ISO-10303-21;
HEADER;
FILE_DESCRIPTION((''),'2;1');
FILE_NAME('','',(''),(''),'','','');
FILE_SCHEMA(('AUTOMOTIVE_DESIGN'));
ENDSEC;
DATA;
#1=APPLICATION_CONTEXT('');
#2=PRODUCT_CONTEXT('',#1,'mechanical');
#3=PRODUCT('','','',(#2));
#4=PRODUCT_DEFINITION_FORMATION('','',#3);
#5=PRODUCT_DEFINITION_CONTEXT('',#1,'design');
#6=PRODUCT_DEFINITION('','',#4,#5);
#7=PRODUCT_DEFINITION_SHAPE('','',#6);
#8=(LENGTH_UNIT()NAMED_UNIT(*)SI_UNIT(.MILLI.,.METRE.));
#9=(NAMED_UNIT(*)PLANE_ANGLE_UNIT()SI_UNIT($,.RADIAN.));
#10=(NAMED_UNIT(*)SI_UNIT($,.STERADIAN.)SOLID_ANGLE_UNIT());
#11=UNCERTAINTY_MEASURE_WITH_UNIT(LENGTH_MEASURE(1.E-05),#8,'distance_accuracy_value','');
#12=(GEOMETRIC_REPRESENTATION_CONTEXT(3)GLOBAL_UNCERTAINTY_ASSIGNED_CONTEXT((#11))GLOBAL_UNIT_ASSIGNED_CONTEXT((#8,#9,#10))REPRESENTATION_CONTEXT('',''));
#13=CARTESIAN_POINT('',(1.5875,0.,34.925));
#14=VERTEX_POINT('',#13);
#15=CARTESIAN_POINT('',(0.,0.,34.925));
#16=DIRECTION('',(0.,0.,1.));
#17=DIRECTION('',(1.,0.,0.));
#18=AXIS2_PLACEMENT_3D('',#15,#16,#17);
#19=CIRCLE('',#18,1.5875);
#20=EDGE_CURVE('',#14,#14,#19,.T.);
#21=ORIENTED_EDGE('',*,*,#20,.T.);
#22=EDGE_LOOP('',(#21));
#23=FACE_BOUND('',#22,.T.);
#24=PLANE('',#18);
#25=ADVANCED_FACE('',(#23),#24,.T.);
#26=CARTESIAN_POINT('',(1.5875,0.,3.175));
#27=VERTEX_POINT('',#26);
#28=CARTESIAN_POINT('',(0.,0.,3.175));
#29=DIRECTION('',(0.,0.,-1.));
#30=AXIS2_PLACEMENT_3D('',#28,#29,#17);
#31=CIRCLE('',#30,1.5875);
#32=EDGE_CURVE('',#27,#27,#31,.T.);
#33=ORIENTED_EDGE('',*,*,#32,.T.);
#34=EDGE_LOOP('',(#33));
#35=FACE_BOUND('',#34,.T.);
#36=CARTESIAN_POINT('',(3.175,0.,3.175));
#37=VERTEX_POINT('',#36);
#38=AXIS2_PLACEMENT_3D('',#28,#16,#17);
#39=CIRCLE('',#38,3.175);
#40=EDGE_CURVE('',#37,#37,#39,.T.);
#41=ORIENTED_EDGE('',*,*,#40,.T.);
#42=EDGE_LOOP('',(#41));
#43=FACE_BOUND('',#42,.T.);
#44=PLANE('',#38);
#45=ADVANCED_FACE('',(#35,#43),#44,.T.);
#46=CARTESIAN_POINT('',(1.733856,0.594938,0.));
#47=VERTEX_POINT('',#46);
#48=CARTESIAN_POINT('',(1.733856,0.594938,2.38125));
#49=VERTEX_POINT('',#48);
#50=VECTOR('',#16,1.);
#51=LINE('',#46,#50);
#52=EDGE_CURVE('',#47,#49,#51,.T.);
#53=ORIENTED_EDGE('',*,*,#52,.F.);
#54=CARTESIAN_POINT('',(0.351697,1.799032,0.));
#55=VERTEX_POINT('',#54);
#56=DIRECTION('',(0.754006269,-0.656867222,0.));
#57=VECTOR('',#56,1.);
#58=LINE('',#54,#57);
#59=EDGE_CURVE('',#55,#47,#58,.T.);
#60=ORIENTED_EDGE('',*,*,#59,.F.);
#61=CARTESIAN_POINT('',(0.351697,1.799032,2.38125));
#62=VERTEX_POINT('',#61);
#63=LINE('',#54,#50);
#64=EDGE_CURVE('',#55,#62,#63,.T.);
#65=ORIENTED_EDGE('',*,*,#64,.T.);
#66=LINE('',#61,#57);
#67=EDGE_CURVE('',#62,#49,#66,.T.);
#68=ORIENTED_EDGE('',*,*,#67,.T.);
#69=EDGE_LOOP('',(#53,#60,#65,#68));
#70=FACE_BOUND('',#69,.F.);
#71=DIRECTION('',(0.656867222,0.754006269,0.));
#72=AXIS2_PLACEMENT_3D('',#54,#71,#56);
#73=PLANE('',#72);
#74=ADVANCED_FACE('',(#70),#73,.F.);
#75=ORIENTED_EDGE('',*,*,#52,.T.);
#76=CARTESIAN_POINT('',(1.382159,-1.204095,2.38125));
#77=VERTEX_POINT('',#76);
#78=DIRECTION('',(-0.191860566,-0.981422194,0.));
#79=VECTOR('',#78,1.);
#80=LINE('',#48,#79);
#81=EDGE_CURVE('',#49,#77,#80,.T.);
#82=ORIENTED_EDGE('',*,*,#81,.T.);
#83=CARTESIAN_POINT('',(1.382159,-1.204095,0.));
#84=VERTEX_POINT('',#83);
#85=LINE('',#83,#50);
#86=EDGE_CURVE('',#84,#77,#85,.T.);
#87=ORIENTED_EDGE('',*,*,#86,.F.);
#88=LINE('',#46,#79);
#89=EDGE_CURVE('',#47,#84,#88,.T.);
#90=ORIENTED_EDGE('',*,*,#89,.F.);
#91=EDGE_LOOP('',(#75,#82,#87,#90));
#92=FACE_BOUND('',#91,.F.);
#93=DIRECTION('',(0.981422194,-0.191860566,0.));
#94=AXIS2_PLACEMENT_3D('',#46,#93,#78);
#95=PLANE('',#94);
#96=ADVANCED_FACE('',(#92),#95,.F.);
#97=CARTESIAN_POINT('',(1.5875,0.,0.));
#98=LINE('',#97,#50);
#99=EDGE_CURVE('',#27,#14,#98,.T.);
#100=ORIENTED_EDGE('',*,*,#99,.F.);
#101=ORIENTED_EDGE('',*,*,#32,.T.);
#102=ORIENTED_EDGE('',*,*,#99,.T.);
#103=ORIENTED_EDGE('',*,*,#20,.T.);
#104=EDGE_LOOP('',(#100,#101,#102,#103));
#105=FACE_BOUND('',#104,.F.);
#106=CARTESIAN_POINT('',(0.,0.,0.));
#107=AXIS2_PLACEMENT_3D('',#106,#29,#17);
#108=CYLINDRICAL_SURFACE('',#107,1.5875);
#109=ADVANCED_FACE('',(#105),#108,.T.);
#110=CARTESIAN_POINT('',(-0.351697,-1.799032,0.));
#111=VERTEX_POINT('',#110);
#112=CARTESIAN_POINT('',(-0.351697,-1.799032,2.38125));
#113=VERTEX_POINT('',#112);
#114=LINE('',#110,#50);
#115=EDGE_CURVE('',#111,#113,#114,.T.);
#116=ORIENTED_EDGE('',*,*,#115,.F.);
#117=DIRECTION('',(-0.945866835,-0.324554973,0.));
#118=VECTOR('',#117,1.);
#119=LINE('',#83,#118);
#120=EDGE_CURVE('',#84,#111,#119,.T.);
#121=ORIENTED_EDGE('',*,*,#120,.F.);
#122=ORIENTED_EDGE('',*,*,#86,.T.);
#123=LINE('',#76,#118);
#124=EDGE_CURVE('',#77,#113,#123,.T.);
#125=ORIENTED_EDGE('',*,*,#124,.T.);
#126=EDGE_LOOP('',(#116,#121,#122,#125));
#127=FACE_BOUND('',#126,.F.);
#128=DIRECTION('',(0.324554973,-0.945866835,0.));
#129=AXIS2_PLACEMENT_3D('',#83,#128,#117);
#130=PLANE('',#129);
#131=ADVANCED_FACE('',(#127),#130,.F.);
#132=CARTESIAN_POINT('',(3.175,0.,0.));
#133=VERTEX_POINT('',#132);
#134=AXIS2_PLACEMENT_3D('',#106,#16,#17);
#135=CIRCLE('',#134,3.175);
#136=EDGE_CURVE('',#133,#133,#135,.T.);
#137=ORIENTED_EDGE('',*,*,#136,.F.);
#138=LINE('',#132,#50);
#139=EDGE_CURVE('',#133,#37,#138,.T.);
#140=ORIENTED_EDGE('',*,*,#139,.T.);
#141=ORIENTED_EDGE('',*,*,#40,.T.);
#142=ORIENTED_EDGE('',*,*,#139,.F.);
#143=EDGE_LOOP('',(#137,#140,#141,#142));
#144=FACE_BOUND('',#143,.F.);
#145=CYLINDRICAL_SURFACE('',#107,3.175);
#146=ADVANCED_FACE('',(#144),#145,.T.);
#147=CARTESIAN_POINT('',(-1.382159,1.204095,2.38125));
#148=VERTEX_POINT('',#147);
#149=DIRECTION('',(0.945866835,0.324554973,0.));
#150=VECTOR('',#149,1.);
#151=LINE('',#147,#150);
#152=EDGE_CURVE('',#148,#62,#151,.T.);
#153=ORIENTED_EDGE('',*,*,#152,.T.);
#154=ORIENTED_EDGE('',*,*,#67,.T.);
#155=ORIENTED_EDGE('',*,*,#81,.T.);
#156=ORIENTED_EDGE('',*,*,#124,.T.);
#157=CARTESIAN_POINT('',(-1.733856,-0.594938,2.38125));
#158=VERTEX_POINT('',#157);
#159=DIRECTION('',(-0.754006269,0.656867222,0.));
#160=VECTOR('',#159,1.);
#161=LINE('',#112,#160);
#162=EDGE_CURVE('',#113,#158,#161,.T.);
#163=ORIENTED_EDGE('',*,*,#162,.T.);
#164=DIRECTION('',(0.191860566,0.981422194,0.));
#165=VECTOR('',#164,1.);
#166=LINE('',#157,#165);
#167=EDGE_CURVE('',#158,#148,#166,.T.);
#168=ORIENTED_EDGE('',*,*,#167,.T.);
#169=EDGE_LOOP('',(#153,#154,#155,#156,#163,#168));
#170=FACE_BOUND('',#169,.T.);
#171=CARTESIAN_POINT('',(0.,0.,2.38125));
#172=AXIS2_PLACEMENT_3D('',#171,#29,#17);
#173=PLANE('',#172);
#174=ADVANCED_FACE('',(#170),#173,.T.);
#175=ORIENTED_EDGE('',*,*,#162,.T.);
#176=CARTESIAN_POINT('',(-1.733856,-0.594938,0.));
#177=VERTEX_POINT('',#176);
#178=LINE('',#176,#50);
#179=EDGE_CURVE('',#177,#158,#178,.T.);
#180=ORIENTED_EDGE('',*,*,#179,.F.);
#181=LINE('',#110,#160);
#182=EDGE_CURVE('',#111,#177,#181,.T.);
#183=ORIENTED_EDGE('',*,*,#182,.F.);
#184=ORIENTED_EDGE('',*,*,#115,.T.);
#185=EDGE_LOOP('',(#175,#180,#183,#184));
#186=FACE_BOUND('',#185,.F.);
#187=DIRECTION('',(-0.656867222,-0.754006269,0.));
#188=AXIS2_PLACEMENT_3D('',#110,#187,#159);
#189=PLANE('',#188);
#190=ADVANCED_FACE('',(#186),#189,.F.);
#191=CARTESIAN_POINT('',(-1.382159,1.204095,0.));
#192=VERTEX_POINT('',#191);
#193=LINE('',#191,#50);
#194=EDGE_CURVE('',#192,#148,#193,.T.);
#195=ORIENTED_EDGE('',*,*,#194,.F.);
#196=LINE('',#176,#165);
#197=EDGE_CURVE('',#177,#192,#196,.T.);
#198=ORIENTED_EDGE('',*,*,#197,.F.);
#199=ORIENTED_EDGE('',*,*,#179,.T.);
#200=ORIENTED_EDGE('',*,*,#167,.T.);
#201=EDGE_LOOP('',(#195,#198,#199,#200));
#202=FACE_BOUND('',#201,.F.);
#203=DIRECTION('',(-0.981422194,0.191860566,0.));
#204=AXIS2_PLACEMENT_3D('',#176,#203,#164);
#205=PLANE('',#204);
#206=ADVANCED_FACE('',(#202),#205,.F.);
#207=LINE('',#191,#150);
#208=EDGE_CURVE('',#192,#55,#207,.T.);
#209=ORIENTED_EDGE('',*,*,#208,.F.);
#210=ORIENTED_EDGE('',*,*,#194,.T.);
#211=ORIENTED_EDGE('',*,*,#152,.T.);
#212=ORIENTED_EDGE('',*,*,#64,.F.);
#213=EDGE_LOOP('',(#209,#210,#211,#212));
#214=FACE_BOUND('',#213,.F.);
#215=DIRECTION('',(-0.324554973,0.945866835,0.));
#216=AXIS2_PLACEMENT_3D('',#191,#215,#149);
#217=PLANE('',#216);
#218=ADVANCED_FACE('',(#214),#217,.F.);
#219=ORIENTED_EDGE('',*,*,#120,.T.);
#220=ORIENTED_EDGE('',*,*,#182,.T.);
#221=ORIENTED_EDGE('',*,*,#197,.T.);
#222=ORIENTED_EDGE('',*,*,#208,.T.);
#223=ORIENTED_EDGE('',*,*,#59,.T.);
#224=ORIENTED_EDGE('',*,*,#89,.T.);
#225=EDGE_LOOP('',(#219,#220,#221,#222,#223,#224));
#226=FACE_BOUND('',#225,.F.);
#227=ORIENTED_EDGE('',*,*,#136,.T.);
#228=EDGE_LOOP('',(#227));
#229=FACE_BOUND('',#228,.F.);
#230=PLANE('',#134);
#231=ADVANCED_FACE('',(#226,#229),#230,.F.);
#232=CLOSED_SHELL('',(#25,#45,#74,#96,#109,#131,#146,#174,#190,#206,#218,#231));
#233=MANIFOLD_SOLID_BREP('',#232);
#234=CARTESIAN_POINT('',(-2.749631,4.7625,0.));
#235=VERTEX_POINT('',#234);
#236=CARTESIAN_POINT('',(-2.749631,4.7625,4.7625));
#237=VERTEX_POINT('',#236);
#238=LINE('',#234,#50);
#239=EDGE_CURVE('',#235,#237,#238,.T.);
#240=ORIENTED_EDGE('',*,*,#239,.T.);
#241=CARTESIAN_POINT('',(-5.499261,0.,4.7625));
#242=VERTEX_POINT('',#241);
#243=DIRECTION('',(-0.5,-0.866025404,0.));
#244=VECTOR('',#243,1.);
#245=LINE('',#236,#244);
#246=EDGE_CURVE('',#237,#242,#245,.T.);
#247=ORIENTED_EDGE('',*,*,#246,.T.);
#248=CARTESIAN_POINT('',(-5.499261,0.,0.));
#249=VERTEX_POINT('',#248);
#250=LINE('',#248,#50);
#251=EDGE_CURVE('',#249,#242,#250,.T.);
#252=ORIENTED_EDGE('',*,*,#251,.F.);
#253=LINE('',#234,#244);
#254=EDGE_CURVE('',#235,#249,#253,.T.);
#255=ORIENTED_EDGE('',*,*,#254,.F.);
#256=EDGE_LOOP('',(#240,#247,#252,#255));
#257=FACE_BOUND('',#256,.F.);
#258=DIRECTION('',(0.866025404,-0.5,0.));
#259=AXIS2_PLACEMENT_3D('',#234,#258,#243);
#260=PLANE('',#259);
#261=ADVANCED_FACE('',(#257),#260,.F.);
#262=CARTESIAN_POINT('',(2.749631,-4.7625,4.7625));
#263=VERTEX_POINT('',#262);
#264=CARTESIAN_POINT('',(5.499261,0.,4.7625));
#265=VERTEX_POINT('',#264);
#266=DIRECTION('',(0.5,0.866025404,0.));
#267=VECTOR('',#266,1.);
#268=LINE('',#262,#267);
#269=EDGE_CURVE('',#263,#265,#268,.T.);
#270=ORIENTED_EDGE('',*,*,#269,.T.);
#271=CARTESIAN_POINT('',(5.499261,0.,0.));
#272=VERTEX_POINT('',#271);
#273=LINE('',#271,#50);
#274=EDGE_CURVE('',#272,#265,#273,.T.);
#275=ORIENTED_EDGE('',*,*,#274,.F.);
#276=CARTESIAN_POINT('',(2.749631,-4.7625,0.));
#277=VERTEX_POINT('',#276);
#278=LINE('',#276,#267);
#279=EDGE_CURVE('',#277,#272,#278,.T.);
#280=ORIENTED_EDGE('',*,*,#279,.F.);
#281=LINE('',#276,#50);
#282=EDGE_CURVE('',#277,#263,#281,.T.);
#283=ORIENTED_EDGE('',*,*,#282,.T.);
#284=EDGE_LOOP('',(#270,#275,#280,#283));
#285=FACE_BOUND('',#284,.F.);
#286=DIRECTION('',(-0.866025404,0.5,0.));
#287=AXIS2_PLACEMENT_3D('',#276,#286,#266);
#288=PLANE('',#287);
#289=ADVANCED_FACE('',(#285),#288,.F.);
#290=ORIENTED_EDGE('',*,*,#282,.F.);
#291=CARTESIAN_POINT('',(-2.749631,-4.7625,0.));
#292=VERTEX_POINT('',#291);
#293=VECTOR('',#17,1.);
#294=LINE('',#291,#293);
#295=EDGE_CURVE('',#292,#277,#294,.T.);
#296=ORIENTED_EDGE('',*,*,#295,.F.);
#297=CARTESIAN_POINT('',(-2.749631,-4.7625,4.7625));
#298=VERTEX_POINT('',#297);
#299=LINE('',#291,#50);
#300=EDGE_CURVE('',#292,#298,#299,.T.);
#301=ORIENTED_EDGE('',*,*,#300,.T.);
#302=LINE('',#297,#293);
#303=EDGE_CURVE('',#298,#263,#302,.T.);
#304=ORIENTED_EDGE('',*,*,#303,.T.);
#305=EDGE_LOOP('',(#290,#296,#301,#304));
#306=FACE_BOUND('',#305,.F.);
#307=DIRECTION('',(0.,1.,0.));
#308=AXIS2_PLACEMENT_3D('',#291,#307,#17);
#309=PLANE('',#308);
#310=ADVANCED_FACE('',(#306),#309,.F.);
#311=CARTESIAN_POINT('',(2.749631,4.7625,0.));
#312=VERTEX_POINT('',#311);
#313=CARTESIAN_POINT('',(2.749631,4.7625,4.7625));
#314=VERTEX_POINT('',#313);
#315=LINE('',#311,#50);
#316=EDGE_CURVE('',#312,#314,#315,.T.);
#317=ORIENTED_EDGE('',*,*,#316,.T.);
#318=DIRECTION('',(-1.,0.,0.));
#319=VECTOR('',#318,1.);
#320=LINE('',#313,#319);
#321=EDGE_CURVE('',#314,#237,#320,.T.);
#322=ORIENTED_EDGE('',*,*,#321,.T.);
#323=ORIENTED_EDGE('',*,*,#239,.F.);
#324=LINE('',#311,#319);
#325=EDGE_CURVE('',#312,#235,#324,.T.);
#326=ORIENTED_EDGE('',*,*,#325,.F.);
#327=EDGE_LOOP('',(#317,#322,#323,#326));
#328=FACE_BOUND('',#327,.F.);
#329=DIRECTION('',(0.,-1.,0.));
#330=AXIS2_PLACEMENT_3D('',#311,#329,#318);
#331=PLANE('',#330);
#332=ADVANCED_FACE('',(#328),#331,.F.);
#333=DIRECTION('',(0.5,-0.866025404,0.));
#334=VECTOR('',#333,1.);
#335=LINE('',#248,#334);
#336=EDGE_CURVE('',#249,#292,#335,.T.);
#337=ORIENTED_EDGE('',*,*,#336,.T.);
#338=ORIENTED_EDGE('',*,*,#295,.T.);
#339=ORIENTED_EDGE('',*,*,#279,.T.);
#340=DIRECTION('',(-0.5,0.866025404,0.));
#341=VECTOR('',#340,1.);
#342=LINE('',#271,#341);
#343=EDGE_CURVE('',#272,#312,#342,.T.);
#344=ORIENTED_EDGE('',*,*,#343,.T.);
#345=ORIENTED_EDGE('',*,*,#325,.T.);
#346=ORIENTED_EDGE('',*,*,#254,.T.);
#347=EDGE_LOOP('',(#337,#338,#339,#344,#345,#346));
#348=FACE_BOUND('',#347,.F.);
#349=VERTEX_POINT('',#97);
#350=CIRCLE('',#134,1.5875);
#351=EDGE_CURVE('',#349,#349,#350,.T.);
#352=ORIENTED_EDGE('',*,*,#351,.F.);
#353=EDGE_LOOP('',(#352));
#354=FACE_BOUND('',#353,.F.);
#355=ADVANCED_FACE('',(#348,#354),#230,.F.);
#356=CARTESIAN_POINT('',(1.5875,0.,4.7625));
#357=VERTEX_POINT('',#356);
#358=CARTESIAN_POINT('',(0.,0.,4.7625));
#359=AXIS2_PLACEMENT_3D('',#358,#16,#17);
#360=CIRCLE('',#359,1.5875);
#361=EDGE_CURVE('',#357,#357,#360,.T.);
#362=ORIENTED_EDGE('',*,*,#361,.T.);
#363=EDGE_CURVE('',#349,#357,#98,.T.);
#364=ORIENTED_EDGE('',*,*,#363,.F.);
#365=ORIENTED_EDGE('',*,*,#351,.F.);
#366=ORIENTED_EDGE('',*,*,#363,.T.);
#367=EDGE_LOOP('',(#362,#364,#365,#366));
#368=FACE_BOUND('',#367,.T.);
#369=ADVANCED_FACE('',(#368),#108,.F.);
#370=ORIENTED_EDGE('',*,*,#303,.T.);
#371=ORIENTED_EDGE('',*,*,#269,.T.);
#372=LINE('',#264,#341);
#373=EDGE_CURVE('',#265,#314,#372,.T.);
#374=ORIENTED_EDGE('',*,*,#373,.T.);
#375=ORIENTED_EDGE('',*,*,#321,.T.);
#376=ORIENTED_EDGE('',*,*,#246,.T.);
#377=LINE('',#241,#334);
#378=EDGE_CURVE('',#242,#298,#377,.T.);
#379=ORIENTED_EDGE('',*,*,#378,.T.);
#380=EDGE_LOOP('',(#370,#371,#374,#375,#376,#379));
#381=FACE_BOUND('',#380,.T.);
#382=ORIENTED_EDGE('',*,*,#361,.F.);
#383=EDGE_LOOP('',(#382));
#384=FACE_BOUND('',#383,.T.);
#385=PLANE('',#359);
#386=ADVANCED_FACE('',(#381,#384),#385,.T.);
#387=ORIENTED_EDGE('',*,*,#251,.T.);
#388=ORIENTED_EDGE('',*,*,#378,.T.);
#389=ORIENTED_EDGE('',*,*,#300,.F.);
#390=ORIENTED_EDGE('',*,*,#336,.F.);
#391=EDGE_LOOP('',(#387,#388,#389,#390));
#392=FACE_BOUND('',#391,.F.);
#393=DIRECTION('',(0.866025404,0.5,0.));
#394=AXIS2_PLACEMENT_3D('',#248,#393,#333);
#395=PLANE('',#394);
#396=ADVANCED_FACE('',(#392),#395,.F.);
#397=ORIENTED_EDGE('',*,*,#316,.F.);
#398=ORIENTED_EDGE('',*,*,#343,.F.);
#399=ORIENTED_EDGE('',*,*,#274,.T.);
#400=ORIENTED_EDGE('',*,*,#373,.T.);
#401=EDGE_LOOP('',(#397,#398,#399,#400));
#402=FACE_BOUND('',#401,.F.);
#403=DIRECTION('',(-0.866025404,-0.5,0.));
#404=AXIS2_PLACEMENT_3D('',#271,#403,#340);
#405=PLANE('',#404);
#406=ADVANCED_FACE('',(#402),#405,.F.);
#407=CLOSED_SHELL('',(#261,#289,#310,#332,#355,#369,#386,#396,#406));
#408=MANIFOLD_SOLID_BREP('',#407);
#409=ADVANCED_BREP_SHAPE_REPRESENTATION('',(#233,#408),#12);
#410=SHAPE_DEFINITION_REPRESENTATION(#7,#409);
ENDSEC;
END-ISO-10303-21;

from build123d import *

# Parameters (mm, degrees)
F0_R     = 1.5875
F1_DEPTH = 4.7625
F2_DEPTH = 4.7625
F3_R     = 3.175
F4_DEPTH = 3.175
F5_R     = 1.5875
F6_DEPTH = 34.925
F8_DEPTH = 2.38125


with BuildPart() as f1:
    # F0 (on Top) → F1 (new body)
    with BuildSketch(Plane.XY):
        Polygon((2.749630657, 4.7625), (-2.749630657, 4.7625), (-5.499261314, 0), (-2.749630657, -4.7625), (2.749630657, -4.7625), (5.499261314, 0), align=None)
        Circle(F0_R, mode=Mode.SUBTRACT)
    extrude(amount=F1_DEPTH)

    # F0 (on Top) → F2 (cut)
    with BuildSketch(Plane.XY):
        Circle(F0_R)
    extrude(amount=F2_DEPTH, mode=Mode.SUBTRACT)


with BuildPart() as f4:
    # F3 (on Top) → F4 (new body)
    with BuildSketch(Plane.XY):
        Circle(F3_R)
    extrude(amount=F4_DEPTH)

    # F5 (on Top) → F6 (join)
    with BuildSketch(Plane.XY):
        Circle(F5_R)
    extrude(amount=F6_DEPTH)

    # F7 (on face) → F8 (cut)
    with BuildSketch(Plane(origin=(0, 0, 0), x_dir=(1, 0, 0), z_dir=(0, 0, -1))):
        Polygon((-0.3516971302, 1.7990323682), (-1.7338562982, 0.594937535), (-1.382159168, -1.2040948333), (0.3516971302, -1.7990323682), (1.7338562982, -0.594937535), (1.382159168, 1.2040948333), align=None)
    extrude(amount=-F8_DEPTH, mode=Mode.SUBTRACT)


solid = Compound([f1.part, f4.part])
